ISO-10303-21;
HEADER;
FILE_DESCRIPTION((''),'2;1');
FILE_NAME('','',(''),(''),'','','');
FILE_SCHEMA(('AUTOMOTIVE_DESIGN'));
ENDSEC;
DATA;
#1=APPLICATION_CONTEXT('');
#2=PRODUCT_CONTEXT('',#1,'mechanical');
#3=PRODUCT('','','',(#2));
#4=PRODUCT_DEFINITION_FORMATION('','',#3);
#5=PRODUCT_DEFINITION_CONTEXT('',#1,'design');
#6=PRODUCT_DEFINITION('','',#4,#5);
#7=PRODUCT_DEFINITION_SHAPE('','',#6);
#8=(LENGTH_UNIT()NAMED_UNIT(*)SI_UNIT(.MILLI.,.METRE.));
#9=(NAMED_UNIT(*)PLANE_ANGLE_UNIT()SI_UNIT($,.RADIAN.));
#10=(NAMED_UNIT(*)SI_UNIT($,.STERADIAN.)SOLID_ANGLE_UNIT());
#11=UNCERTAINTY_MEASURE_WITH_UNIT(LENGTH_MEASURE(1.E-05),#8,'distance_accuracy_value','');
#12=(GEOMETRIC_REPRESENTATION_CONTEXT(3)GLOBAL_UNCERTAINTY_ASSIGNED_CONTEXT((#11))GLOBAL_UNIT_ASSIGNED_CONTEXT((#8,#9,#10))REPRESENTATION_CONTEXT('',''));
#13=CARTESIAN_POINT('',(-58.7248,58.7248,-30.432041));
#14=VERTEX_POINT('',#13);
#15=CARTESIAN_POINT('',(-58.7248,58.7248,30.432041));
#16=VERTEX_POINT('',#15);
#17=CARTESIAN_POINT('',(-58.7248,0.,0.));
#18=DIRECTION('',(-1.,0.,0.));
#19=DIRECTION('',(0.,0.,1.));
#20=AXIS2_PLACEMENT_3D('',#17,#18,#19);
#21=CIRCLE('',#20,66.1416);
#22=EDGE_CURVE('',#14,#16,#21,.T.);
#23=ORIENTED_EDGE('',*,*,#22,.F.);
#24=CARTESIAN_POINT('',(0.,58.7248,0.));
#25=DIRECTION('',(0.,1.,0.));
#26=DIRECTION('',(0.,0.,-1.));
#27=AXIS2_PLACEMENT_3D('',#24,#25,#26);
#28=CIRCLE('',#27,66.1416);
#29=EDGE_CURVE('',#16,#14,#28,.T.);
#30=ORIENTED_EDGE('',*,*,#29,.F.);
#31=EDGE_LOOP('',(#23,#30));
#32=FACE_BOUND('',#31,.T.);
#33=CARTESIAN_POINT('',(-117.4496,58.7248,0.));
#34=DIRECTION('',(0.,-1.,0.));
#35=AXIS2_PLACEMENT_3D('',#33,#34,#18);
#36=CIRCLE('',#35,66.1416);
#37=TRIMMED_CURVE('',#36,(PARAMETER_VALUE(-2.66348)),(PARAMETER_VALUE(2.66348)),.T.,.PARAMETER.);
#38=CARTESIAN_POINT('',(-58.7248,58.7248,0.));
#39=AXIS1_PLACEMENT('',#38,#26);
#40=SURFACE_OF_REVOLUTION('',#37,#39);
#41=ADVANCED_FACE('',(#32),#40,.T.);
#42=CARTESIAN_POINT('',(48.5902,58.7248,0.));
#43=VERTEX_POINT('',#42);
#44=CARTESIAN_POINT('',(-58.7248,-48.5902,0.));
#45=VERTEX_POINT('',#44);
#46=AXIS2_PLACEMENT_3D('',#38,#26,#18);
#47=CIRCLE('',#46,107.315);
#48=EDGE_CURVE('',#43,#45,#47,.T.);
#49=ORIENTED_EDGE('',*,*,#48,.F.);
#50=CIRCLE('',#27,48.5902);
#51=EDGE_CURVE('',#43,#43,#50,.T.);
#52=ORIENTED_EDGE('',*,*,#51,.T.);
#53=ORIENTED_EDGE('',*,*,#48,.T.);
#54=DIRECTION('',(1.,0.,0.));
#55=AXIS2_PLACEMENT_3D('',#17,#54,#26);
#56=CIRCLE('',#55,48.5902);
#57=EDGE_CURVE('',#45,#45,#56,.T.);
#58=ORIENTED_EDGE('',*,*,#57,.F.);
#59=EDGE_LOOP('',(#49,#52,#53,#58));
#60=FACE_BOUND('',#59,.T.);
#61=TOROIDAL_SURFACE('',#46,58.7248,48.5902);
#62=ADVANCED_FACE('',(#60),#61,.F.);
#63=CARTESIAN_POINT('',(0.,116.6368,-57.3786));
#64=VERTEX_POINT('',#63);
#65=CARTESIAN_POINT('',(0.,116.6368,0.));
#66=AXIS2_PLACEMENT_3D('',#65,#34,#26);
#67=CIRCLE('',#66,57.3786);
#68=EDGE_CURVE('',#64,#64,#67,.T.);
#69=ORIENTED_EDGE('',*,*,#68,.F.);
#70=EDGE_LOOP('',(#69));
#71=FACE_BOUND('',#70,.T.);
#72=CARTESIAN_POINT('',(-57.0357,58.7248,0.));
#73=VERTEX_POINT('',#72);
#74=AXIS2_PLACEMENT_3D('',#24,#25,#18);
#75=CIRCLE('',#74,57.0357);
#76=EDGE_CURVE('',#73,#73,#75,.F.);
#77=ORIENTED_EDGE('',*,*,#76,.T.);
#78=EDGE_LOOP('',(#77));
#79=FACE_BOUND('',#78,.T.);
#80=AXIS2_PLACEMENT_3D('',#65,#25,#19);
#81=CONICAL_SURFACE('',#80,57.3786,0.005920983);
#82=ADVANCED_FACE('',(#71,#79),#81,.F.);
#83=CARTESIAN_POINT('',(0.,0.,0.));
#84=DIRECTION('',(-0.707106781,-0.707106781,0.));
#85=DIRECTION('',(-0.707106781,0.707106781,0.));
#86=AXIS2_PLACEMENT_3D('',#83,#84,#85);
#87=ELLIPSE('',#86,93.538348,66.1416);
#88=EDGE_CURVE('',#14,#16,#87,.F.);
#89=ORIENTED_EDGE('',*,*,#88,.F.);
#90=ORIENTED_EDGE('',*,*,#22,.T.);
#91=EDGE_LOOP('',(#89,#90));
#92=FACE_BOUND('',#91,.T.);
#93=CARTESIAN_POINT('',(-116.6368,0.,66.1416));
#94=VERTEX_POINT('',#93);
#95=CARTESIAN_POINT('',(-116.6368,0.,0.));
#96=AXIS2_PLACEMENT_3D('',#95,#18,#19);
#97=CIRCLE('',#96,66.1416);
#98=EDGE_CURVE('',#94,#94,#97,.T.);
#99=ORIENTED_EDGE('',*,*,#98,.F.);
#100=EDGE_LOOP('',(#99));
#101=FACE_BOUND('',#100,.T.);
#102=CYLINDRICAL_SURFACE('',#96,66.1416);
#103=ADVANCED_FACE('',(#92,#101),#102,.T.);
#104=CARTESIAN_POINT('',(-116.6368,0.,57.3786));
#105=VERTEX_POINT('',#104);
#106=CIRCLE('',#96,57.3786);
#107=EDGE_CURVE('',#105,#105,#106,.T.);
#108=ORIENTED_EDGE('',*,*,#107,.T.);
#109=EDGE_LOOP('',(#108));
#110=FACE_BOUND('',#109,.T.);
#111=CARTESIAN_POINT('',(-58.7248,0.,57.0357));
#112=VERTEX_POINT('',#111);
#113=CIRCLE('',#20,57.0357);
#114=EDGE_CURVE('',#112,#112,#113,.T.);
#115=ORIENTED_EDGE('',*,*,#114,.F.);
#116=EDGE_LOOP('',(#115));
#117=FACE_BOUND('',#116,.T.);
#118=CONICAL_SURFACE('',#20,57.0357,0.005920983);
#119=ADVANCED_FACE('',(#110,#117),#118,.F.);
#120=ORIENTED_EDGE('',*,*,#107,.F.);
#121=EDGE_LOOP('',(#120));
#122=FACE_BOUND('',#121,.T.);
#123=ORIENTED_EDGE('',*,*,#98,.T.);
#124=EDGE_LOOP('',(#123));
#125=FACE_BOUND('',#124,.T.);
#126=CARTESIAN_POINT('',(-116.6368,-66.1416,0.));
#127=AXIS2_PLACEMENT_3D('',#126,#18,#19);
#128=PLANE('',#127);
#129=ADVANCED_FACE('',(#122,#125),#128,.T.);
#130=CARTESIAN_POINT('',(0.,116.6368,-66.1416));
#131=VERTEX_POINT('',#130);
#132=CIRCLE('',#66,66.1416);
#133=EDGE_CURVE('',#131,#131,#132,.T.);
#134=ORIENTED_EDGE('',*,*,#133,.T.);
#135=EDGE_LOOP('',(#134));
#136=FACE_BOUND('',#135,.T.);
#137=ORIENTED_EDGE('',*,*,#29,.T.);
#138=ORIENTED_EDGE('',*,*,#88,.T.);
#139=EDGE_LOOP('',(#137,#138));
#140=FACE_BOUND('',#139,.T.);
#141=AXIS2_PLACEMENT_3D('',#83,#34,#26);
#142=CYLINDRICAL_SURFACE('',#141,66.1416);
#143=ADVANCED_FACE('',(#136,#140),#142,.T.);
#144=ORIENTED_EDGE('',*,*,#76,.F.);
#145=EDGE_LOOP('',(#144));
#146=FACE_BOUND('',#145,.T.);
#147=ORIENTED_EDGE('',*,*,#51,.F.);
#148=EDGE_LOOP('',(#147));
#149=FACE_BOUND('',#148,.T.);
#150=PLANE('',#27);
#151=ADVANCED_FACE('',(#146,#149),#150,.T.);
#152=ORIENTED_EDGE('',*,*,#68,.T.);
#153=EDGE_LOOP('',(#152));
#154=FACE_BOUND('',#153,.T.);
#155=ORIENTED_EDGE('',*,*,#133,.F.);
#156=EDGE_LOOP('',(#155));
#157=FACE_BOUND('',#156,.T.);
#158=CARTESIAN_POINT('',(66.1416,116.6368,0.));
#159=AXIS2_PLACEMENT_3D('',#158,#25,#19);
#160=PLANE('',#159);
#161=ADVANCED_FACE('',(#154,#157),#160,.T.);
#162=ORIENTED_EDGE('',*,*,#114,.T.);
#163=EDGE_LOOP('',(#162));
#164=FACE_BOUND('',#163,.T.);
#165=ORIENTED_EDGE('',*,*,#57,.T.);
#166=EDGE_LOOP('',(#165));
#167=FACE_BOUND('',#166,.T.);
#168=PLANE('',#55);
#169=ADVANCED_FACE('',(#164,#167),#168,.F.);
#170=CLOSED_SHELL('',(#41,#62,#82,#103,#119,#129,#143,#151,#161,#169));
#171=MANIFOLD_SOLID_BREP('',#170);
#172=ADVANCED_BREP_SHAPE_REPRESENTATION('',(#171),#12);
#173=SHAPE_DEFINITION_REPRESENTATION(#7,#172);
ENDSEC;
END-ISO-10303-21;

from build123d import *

# Parameters (mm, degrees)
SKETCH3_R   = 66.1416
SKETCH3_R_2 = 48.5902


with BuildPart() as part:
    # Sketch1 → Revolve1 (revolve)
    with BuildSketch(Plane.XY):
        Polygon((-116.6368, -66.1416), (-58.7248, -66.1416), (-58.7248, -57.0357), (-116.6368, -57.3786), align=None)
    revolve(axis=Axis((-116.6368, 0, 0), (1, 0, 0)))


with BuildPart() as body_2:
    # Sketch2 → Revolve2 (revolve)
    with BuildSketch(Plane.XY):
        Polygon((57.3786, 116.6368), (57.0357, 58.7248), (66.1416, 58.7248), (66.1416, 116.6368), align=None)
    revolve(axis=Axis((0, 0, 0), (0, 1, 0)))


with BuildPart() as sweep1_tool:
    # Sweep1: sweep along a path in Sketch4
    with BuildLine(Plane.XY) as sweep1_path:
        ThreePointArc((-58.7248, 0), (-17.200096, 17.200096), (0, 58.7248))
    # Sketch3 → Sweep1 (sweep)
    with BuildSketch(Plane(origin=(-58.7248, 0, 0), x_dir=(0, 0, -1), z_dir=(1, 0, 0))):
        Circle(SKETCH3_R)
        Circle(SKETCH3_R_2, mode=Mode.SUBTRACT)
    sweep(path=sweep1_path.line)


with BuildPart() as part_1:
    add(part.part)


with BuildPart() as part_2:
    # Sweep1: joined with sweep1_tool
    add(part_1.part.fuse(sweep1_tool.part, body_2.part, tol=0.00001))


solid = part_2.part
